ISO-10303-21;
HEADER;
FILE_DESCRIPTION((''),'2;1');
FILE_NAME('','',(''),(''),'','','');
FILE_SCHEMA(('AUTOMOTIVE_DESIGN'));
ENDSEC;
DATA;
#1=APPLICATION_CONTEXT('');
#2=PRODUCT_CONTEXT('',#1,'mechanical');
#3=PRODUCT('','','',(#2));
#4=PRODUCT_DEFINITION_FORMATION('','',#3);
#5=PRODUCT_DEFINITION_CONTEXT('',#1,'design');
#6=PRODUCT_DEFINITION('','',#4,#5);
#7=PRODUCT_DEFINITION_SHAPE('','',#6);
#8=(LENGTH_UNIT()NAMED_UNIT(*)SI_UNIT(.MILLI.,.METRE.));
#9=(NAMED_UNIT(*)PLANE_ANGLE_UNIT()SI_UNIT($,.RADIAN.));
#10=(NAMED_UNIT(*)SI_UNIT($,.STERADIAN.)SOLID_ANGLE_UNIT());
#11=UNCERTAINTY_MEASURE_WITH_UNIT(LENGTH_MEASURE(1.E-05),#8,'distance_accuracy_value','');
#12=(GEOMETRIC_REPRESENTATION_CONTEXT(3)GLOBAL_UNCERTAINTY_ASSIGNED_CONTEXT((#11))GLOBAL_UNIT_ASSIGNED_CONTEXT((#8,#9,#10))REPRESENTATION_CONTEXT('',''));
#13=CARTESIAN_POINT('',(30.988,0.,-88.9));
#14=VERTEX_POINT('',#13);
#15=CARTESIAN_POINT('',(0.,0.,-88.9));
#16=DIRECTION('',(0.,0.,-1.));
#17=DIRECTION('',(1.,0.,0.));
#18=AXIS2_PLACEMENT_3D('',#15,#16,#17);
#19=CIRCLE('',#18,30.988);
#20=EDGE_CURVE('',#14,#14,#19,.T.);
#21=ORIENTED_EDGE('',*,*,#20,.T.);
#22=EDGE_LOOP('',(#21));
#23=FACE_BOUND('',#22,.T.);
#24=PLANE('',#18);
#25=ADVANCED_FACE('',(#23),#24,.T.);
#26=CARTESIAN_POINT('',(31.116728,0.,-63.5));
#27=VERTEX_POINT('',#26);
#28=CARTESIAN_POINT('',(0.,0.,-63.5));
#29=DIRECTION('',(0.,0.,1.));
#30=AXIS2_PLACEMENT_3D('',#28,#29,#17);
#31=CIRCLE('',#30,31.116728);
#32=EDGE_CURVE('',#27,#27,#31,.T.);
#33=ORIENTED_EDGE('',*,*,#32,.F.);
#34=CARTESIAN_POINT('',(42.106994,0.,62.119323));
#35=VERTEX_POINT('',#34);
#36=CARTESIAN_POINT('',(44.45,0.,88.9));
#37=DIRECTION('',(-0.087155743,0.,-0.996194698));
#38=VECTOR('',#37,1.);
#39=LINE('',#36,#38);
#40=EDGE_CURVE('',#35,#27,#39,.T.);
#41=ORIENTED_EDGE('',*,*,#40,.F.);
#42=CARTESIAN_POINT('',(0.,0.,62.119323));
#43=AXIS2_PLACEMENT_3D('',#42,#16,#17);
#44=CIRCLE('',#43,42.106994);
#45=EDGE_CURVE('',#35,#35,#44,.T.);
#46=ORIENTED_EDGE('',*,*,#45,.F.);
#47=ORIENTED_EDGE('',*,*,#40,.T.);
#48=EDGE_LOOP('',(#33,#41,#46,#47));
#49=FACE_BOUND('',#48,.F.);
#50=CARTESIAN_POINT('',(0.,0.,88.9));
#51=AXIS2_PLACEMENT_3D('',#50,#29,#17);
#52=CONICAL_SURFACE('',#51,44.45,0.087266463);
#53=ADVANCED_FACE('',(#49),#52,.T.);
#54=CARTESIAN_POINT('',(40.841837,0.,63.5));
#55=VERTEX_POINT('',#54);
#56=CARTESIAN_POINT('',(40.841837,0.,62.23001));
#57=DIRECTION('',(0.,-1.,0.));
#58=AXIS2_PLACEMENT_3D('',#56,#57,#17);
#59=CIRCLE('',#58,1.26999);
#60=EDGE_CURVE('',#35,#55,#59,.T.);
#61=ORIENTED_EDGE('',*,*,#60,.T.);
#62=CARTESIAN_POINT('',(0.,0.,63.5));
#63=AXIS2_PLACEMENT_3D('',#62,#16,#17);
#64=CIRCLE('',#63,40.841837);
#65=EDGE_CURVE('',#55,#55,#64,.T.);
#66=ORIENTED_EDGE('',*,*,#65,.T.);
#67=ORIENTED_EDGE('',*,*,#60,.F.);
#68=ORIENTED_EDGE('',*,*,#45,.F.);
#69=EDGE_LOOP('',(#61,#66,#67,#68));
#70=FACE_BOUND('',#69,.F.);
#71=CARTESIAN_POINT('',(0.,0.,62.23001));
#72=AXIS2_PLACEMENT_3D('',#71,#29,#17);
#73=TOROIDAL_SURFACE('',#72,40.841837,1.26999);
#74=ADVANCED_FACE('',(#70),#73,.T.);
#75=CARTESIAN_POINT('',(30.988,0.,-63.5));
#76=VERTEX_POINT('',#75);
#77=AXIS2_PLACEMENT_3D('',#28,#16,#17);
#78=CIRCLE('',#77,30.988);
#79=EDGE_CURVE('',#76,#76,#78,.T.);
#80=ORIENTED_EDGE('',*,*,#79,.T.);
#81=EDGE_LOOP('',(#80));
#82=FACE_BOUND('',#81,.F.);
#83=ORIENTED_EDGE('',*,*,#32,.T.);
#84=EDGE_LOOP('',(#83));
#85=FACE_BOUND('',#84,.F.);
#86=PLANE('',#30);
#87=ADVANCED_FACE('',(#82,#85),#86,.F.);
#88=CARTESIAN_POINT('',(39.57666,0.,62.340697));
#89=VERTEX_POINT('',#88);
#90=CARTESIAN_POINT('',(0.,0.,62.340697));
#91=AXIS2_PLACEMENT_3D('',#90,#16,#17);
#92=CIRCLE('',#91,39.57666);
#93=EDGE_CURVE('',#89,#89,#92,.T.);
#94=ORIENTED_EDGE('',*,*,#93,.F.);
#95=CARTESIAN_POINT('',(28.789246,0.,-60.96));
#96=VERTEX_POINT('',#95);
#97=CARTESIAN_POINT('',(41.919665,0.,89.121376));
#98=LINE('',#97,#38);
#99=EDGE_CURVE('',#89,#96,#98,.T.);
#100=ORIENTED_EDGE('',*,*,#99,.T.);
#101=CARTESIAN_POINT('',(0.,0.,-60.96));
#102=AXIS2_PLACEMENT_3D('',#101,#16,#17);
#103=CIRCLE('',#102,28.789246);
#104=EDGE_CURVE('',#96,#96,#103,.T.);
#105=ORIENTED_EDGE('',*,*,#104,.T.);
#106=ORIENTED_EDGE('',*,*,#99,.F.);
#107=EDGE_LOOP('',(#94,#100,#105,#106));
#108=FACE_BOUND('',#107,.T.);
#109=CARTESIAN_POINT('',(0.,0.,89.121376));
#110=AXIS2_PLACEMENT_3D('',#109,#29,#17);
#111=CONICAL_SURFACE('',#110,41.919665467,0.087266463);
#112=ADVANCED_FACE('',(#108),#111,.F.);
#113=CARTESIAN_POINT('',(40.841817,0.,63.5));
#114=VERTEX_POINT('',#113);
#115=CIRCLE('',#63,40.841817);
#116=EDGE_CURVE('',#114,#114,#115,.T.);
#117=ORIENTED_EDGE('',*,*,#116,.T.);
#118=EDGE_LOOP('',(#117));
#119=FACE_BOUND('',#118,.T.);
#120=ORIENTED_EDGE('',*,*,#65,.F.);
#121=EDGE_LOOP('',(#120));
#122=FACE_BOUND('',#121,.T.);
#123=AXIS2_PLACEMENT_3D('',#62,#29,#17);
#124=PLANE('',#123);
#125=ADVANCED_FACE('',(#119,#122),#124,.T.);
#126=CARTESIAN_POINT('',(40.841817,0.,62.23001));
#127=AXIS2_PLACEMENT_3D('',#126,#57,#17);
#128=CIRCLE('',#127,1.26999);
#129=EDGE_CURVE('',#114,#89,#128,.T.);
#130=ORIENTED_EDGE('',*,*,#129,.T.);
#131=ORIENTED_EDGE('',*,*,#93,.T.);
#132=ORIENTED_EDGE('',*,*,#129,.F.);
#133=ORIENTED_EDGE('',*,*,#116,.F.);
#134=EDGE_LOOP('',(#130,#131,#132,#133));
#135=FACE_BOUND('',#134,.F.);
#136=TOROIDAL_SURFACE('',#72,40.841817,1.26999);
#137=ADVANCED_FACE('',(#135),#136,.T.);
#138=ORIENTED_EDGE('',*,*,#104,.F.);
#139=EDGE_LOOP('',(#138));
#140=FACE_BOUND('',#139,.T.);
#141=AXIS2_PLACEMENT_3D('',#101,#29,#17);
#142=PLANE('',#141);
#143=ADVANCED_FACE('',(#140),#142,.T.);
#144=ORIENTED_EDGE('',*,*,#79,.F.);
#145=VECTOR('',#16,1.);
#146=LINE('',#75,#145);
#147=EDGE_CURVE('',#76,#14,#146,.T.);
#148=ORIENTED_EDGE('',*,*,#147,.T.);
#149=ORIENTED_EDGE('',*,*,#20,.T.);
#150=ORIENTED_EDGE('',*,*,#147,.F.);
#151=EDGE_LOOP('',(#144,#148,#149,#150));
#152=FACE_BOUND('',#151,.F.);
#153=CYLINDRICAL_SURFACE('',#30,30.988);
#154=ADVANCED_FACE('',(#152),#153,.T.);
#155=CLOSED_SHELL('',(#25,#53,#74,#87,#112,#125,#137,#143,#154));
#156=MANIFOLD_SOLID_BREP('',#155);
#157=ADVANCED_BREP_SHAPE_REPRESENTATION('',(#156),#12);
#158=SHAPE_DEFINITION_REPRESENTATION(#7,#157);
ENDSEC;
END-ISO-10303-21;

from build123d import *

# Parameters (mm, degrees)
F0_R     = 44.45
F1_DEPTH = 63.5
F3_T     = -2.54
F4_R     = 1.26999
F5_R     = 30.988
F6_DEPTH = 25.4


# Not quite as in the source:
# - a fillet or chamfer that OpenCascade refuses, or shapes differently, is made with other operations: its cross-section is extruded or revolved along the edge and cut away or added
# - a fillet or chamfer is up to 0.001 mm smaller than in the source, because OpenCascade refuses the exact size


with BuildPart() as f1:
    # F0 (on Top) → F1 (new body, symmetric)
    with BuildSketch(Plane.XY):
        Circle(F0_R)
    extrude(amount=F1_DEPTH, both=True)

    # F2: chamfer of 152.4 x 13.3332723214 on 1 edges, made by hand

    # F2_s1 → F2_t2 (revolve, cut)
    with BuildSketch(Plane.XZ):
        Polygon((44.45, 88.9), (31.1167276786, -63.5), (44.45, -63.5), align=None)
    revolve(axis=Axis((0, 0, -63.5), (0, 0, 1)), mode=Mode.SUBTRACT)

    # F3
    f3_openings = [f1.faces().sort_by_distance(p)[0] for p in [
        (0, 0, 63.5),
    ]]
    offset(amount=F3_T, openings=f3_openings)

    # F4 (radius 1.27 in the source; OpenCascade refuses exactly that, so slightly less here)
    f4_edges = [f1.edges().sort_by_distance(p)[0] for p in [
        (-42.227788, 0, 63.5),
        (-39.678086, 0, 63.5),
    ]]
    fillet(f4_edges, radius=F4_R)

    # F5 (on face) → F6 (join)
    with BuildSketch(Plane(origin=(0, 0, -63.5), x_dir=(1, 0, 0), z_dir=(0, 0, -1))):
        Circle(F5_R)
    extrude(amount=F6_DEPTH)


solid = f1.part
